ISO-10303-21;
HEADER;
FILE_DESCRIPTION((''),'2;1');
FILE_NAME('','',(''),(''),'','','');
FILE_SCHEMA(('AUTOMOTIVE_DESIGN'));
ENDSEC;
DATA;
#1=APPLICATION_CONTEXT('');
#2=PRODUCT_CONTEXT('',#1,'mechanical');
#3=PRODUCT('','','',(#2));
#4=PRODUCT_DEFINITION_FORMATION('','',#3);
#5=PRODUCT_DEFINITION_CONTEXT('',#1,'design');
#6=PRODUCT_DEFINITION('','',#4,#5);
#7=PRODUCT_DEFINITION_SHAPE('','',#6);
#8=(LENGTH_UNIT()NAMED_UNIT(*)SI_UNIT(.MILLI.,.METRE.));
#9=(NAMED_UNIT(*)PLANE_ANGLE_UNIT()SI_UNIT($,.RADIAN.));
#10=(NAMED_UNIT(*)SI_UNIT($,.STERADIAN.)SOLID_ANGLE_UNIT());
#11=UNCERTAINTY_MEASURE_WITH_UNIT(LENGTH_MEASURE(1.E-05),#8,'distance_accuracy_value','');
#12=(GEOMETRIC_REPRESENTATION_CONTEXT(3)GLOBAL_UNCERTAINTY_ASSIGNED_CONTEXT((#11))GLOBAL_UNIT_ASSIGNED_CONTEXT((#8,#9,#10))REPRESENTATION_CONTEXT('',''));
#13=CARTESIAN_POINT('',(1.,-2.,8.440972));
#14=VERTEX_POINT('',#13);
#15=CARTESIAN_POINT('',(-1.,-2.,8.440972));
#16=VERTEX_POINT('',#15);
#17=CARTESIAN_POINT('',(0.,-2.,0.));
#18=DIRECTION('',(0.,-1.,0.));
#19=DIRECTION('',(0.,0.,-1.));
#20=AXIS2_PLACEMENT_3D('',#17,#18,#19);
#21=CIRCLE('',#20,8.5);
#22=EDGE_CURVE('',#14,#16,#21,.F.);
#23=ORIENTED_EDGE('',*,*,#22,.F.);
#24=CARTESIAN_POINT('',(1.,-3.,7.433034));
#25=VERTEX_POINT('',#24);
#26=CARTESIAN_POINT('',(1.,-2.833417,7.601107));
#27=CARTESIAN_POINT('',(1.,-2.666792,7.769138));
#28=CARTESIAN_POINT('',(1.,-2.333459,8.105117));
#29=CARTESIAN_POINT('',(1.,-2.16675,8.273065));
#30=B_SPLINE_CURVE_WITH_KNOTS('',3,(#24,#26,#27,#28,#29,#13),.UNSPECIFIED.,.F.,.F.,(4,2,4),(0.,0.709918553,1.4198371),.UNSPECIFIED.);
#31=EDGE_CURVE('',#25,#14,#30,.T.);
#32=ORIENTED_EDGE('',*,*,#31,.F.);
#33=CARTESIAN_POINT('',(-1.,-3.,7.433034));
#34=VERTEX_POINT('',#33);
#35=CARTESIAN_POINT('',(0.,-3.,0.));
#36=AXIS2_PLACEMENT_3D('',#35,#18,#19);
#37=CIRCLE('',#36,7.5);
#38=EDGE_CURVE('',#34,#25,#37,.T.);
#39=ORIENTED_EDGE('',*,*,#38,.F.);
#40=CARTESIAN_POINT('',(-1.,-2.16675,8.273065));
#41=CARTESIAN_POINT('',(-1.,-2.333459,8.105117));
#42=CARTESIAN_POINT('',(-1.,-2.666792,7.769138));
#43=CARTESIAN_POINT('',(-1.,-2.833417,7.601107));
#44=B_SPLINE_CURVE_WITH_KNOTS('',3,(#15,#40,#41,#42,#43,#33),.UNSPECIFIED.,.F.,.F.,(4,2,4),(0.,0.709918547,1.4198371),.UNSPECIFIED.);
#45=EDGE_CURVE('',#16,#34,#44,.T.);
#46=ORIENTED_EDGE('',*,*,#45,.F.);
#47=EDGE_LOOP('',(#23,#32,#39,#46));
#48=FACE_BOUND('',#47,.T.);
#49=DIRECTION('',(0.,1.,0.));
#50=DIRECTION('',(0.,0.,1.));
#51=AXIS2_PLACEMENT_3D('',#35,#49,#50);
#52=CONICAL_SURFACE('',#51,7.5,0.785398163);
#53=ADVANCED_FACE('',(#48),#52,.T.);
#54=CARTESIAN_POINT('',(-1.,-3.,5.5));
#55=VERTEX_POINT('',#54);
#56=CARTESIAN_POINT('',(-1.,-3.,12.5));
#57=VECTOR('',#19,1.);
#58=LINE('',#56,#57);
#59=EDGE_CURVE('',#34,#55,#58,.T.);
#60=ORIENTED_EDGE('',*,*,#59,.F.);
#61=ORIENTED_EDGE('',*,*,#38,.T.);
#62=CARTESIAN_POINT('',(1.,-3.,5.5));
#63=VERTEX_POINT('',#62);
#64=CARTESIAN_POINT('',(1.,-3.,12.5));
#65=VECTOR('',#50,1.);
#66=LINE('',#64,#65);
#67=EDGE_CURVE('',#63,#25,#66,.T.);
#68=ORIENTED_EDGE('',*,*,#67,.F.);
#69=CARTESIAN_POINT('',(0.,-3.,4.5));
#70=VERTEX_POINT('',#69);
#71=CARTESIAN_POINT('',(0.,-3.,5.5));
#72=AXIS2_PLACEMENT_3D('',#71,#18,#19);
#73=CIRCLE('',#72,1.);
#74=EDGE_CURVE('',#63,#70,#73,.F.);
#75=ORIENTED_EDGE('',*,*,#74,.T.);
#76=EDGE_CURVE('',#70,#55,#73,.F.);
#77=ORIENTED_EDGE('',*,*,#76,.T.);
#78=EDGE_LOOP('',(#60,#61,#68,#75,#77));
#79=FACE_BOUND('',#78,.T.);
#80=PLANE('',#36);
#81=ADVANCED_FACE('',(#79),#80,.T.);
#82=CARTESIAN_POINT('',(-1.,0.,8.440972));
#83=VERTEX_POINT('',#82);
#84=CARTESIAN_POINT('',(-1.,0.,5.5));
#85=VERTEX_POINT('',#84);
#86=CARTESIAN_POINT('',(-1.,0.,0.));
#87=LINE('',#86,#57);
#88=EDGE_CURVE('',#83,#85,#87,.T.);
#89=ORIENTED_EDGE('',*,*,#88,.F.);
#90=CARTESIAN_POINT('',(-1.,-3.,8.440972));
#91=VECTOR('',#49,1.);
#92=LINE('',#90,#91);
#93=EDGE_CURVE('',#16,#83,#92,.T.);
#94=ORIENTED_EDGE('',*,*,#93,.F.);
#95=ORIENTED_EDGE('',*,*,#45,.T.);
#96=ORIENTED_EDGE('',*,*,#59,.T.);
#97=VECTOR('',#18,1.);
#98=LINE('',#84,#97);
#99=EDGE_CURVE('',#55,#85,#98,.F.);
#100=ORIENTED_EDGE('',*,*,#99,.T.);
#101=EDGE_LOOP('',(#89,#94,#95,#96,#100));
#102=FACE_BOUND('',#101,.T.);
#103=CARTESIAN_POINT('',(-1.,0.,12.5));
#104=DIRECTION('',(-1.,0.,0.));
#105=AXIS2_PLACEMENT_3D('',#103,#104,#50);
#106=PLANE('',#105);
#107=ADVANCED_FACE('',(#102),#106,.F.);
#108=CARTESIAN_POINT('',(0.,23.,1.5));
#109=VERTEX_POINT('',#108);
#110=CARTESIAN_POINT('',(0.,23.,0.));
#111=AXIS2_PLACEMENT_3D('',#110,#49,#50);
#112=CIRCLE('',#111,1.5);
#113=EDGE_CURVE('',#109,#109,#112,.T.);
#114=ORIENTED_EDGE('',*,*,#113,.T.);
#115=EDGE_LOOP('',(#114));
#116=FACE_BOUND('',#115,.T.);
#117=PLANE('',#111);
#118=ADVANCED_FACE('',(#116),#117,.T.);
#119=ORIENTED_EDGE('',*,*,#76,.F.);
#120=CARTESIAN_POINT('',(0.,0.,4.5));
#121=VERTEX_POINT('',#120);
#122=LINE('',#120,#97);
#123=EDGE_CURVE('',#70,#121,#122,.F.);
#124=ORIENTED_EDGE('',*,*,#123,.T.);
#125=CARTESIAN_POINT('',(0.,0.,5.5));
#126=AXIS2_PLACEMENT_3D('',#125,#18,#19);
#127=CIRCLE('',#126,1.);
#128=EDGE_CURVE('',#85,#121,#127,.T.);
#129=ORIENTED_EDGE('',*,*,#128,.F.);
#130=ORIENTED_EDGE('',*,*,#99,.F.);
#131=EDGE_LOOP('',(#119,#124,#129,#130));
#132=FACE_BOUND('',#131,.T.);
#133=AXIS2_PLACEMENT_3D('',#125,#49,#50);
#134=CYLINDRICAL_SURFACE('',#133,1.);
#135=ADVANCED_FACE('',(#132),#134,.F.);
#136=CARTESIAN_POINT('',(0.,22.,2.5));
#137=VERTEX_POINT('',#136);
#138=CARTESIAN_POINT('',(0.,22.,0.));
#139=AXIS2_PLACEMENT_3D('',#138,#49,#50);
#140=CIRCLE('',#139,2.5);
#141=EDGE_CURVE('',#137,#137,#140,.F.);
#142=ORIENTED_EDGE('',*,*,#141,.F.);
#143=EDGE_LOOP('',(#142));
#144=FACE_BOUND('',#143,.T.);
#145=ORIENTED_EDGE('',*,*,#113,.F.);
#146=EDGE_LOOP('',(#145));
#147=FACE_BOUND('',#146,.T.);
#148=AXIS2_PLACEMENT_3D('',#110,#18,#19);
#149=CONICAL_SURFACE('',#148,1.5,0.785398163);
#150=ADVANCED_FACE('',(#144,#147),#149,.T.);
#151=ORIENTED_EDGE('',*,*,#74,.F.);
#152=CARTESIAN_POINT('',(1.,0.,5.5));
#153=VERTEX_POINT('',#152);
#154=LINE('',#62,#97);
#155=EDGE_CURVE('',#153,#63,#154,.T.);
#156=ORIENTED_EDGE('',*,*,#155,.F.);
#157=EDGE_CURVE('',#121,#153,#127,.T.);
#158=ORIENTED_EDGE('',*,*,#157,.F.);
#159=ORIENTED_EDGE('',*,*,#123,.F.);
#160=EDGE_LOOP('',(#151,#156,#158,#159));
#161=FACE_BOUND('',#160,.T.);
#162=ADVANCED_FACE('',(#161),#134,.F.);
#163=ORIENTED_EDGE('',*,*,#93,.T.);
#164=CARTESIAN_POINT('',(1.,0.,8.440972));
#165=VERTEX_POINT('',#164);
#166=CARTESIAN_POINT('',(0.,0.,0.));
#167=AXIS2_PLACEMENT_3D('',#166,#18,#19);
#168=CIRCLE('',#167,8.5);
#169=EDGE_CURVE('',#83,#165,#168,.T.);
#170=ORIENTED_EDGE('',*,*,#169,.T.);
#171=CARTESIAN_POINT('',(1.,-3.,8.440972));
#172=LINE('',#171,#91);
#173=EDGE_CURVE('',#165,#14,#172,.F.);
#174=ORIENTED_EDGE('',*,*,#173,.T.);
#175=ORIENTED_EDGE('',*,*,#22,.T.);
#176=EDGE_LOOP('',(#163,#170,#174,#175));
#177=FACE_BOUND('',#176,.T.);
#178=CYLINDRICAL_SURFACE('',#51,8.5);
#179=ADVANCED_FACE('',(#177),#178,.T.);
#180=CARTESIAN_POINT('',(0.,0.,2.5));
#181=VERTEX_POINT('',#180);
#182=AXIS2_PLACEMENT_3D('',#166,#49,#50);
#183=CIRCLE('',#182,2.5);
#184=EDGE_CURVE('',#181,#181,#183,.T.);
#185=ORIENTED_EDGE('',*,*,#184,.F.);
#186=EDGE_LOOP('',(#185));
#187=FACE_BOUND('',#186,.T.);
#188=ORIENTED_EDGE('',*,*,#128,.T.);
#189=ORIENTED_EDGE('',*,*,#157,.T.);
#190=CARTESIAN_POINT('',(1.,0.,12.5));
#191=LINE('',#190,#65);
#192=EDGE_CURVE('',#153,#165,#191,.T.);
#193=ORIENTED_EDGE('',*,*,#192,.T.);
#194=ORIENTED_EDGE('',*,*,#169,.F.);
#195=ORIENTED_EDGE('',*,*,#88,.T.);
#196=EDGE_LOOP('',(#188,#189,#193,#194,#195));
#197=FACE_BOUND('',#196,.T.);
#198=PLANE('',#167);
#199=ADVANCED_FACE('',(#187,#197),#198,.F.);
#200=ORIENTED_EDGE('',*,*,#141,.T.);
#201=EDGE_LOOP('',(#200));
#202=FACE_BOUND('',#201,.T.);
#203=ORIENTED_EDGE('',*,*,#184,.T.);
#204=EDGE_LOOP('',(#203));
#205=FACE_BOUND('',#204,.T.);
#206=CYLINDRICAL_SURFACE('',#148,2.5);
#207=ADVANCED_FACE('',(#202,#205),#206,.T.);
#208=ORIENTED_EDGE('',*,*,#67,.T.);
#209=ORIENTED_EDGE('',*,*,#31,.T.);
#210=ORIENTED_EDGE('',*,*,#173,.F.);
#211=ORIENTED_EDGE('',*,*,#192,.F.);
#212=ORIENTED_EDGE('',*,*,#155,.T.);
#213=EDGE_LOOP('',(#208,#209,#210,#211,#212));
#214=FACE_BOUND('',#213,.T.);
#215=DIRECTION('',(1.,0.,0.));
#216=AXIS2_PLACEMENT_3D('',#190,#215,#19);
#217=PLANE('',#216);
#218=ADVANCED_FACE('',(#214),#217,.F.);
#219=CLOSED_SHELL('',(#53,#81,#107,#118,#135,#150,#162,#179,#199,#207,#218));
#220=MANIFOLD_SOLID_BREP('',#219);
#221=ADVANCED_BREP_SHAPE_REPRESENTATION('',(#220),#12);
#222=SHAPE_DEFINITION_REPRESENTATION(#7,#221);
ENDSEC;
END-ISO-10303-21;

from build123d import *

# Parameters (mm, degrees)
SKETCH1_R           = 2.5
BOSS_EXTRUDE1_DEPTH = 23
CHAMFER1_SIZE       = 1
SKETCH2_R           = 8.5
BOSS_EXTRUDE2_DEPTH = 3
SKETCH3_W           = 2
SKETCH3_H           = 8
CUT_EXTRUDE1_DEPTH  = 3
FILLET1_R           = 1
CHAMFER2_SIZE       = 1


with BuildPart() as part:
    # Sketch1 → Boss-Extrude1 (new body)
    with BuildSketch(Plane(origin=(0, 0, 0), x_dir=(1, 0, 0), z_dir=(0, 1, 0))):
        with Locations(Location((0, 0, 0), (0, 0, 270))):
            Circle(SKETCH1_R)
    extrude(amount=BOSS_EXTRUDE1_DEPTH)

    # Chamfer1
    chamfer1_edges = [part.edges().sort_by_distance(p)[0] for p in [
        (0, 23, -2.5),
    ]]
    chamfer(chamfer1_edges, length=CHAMFER1_SIZE)

    # Sketch2 → Boss-Extrude2 (add)
    with BuildSketch(Plane.XZ):
        with Locations(Location((0, 0, 0), (0, 0, 270))):
            Circle(SKETCH2_R)
    extrude(amount=BOSS_EXTRUDE2_DEPTH)

    # Sketch3 → Cut-Extrude1 (cut)
    with BuildSketch(Plane.XZ.offset(3)):
        with Locations((0, 8.5)):
            Rectangle(SKETCH3_W, SKETCH3_H)
    extrude(amount=-CUT_EXTRUDE1_DEPTH, mode=Mode.SUBTRACT)

    # Fillet1
    fillet1_edges = [part.edges().sort_by_distance(p)[0] for p in [
        (-1, -1.5, 4.5),
        (1, -1.5, 4.5),
    ]]
    fillet(fillet1_edges, radius=FILLET1_R - 0.0001)  # a hair under: the kernel refuses the full size

    # Chamfer2
    chamfer2_edges = [part.edges().sort_by_distance(p)[0] for p in [
        (-8.485230045, -3, -0.500870333),
    ]]
    chamfer(chamfer2_edges, length=CHAMFER2_SIZE)


solid = part.part
